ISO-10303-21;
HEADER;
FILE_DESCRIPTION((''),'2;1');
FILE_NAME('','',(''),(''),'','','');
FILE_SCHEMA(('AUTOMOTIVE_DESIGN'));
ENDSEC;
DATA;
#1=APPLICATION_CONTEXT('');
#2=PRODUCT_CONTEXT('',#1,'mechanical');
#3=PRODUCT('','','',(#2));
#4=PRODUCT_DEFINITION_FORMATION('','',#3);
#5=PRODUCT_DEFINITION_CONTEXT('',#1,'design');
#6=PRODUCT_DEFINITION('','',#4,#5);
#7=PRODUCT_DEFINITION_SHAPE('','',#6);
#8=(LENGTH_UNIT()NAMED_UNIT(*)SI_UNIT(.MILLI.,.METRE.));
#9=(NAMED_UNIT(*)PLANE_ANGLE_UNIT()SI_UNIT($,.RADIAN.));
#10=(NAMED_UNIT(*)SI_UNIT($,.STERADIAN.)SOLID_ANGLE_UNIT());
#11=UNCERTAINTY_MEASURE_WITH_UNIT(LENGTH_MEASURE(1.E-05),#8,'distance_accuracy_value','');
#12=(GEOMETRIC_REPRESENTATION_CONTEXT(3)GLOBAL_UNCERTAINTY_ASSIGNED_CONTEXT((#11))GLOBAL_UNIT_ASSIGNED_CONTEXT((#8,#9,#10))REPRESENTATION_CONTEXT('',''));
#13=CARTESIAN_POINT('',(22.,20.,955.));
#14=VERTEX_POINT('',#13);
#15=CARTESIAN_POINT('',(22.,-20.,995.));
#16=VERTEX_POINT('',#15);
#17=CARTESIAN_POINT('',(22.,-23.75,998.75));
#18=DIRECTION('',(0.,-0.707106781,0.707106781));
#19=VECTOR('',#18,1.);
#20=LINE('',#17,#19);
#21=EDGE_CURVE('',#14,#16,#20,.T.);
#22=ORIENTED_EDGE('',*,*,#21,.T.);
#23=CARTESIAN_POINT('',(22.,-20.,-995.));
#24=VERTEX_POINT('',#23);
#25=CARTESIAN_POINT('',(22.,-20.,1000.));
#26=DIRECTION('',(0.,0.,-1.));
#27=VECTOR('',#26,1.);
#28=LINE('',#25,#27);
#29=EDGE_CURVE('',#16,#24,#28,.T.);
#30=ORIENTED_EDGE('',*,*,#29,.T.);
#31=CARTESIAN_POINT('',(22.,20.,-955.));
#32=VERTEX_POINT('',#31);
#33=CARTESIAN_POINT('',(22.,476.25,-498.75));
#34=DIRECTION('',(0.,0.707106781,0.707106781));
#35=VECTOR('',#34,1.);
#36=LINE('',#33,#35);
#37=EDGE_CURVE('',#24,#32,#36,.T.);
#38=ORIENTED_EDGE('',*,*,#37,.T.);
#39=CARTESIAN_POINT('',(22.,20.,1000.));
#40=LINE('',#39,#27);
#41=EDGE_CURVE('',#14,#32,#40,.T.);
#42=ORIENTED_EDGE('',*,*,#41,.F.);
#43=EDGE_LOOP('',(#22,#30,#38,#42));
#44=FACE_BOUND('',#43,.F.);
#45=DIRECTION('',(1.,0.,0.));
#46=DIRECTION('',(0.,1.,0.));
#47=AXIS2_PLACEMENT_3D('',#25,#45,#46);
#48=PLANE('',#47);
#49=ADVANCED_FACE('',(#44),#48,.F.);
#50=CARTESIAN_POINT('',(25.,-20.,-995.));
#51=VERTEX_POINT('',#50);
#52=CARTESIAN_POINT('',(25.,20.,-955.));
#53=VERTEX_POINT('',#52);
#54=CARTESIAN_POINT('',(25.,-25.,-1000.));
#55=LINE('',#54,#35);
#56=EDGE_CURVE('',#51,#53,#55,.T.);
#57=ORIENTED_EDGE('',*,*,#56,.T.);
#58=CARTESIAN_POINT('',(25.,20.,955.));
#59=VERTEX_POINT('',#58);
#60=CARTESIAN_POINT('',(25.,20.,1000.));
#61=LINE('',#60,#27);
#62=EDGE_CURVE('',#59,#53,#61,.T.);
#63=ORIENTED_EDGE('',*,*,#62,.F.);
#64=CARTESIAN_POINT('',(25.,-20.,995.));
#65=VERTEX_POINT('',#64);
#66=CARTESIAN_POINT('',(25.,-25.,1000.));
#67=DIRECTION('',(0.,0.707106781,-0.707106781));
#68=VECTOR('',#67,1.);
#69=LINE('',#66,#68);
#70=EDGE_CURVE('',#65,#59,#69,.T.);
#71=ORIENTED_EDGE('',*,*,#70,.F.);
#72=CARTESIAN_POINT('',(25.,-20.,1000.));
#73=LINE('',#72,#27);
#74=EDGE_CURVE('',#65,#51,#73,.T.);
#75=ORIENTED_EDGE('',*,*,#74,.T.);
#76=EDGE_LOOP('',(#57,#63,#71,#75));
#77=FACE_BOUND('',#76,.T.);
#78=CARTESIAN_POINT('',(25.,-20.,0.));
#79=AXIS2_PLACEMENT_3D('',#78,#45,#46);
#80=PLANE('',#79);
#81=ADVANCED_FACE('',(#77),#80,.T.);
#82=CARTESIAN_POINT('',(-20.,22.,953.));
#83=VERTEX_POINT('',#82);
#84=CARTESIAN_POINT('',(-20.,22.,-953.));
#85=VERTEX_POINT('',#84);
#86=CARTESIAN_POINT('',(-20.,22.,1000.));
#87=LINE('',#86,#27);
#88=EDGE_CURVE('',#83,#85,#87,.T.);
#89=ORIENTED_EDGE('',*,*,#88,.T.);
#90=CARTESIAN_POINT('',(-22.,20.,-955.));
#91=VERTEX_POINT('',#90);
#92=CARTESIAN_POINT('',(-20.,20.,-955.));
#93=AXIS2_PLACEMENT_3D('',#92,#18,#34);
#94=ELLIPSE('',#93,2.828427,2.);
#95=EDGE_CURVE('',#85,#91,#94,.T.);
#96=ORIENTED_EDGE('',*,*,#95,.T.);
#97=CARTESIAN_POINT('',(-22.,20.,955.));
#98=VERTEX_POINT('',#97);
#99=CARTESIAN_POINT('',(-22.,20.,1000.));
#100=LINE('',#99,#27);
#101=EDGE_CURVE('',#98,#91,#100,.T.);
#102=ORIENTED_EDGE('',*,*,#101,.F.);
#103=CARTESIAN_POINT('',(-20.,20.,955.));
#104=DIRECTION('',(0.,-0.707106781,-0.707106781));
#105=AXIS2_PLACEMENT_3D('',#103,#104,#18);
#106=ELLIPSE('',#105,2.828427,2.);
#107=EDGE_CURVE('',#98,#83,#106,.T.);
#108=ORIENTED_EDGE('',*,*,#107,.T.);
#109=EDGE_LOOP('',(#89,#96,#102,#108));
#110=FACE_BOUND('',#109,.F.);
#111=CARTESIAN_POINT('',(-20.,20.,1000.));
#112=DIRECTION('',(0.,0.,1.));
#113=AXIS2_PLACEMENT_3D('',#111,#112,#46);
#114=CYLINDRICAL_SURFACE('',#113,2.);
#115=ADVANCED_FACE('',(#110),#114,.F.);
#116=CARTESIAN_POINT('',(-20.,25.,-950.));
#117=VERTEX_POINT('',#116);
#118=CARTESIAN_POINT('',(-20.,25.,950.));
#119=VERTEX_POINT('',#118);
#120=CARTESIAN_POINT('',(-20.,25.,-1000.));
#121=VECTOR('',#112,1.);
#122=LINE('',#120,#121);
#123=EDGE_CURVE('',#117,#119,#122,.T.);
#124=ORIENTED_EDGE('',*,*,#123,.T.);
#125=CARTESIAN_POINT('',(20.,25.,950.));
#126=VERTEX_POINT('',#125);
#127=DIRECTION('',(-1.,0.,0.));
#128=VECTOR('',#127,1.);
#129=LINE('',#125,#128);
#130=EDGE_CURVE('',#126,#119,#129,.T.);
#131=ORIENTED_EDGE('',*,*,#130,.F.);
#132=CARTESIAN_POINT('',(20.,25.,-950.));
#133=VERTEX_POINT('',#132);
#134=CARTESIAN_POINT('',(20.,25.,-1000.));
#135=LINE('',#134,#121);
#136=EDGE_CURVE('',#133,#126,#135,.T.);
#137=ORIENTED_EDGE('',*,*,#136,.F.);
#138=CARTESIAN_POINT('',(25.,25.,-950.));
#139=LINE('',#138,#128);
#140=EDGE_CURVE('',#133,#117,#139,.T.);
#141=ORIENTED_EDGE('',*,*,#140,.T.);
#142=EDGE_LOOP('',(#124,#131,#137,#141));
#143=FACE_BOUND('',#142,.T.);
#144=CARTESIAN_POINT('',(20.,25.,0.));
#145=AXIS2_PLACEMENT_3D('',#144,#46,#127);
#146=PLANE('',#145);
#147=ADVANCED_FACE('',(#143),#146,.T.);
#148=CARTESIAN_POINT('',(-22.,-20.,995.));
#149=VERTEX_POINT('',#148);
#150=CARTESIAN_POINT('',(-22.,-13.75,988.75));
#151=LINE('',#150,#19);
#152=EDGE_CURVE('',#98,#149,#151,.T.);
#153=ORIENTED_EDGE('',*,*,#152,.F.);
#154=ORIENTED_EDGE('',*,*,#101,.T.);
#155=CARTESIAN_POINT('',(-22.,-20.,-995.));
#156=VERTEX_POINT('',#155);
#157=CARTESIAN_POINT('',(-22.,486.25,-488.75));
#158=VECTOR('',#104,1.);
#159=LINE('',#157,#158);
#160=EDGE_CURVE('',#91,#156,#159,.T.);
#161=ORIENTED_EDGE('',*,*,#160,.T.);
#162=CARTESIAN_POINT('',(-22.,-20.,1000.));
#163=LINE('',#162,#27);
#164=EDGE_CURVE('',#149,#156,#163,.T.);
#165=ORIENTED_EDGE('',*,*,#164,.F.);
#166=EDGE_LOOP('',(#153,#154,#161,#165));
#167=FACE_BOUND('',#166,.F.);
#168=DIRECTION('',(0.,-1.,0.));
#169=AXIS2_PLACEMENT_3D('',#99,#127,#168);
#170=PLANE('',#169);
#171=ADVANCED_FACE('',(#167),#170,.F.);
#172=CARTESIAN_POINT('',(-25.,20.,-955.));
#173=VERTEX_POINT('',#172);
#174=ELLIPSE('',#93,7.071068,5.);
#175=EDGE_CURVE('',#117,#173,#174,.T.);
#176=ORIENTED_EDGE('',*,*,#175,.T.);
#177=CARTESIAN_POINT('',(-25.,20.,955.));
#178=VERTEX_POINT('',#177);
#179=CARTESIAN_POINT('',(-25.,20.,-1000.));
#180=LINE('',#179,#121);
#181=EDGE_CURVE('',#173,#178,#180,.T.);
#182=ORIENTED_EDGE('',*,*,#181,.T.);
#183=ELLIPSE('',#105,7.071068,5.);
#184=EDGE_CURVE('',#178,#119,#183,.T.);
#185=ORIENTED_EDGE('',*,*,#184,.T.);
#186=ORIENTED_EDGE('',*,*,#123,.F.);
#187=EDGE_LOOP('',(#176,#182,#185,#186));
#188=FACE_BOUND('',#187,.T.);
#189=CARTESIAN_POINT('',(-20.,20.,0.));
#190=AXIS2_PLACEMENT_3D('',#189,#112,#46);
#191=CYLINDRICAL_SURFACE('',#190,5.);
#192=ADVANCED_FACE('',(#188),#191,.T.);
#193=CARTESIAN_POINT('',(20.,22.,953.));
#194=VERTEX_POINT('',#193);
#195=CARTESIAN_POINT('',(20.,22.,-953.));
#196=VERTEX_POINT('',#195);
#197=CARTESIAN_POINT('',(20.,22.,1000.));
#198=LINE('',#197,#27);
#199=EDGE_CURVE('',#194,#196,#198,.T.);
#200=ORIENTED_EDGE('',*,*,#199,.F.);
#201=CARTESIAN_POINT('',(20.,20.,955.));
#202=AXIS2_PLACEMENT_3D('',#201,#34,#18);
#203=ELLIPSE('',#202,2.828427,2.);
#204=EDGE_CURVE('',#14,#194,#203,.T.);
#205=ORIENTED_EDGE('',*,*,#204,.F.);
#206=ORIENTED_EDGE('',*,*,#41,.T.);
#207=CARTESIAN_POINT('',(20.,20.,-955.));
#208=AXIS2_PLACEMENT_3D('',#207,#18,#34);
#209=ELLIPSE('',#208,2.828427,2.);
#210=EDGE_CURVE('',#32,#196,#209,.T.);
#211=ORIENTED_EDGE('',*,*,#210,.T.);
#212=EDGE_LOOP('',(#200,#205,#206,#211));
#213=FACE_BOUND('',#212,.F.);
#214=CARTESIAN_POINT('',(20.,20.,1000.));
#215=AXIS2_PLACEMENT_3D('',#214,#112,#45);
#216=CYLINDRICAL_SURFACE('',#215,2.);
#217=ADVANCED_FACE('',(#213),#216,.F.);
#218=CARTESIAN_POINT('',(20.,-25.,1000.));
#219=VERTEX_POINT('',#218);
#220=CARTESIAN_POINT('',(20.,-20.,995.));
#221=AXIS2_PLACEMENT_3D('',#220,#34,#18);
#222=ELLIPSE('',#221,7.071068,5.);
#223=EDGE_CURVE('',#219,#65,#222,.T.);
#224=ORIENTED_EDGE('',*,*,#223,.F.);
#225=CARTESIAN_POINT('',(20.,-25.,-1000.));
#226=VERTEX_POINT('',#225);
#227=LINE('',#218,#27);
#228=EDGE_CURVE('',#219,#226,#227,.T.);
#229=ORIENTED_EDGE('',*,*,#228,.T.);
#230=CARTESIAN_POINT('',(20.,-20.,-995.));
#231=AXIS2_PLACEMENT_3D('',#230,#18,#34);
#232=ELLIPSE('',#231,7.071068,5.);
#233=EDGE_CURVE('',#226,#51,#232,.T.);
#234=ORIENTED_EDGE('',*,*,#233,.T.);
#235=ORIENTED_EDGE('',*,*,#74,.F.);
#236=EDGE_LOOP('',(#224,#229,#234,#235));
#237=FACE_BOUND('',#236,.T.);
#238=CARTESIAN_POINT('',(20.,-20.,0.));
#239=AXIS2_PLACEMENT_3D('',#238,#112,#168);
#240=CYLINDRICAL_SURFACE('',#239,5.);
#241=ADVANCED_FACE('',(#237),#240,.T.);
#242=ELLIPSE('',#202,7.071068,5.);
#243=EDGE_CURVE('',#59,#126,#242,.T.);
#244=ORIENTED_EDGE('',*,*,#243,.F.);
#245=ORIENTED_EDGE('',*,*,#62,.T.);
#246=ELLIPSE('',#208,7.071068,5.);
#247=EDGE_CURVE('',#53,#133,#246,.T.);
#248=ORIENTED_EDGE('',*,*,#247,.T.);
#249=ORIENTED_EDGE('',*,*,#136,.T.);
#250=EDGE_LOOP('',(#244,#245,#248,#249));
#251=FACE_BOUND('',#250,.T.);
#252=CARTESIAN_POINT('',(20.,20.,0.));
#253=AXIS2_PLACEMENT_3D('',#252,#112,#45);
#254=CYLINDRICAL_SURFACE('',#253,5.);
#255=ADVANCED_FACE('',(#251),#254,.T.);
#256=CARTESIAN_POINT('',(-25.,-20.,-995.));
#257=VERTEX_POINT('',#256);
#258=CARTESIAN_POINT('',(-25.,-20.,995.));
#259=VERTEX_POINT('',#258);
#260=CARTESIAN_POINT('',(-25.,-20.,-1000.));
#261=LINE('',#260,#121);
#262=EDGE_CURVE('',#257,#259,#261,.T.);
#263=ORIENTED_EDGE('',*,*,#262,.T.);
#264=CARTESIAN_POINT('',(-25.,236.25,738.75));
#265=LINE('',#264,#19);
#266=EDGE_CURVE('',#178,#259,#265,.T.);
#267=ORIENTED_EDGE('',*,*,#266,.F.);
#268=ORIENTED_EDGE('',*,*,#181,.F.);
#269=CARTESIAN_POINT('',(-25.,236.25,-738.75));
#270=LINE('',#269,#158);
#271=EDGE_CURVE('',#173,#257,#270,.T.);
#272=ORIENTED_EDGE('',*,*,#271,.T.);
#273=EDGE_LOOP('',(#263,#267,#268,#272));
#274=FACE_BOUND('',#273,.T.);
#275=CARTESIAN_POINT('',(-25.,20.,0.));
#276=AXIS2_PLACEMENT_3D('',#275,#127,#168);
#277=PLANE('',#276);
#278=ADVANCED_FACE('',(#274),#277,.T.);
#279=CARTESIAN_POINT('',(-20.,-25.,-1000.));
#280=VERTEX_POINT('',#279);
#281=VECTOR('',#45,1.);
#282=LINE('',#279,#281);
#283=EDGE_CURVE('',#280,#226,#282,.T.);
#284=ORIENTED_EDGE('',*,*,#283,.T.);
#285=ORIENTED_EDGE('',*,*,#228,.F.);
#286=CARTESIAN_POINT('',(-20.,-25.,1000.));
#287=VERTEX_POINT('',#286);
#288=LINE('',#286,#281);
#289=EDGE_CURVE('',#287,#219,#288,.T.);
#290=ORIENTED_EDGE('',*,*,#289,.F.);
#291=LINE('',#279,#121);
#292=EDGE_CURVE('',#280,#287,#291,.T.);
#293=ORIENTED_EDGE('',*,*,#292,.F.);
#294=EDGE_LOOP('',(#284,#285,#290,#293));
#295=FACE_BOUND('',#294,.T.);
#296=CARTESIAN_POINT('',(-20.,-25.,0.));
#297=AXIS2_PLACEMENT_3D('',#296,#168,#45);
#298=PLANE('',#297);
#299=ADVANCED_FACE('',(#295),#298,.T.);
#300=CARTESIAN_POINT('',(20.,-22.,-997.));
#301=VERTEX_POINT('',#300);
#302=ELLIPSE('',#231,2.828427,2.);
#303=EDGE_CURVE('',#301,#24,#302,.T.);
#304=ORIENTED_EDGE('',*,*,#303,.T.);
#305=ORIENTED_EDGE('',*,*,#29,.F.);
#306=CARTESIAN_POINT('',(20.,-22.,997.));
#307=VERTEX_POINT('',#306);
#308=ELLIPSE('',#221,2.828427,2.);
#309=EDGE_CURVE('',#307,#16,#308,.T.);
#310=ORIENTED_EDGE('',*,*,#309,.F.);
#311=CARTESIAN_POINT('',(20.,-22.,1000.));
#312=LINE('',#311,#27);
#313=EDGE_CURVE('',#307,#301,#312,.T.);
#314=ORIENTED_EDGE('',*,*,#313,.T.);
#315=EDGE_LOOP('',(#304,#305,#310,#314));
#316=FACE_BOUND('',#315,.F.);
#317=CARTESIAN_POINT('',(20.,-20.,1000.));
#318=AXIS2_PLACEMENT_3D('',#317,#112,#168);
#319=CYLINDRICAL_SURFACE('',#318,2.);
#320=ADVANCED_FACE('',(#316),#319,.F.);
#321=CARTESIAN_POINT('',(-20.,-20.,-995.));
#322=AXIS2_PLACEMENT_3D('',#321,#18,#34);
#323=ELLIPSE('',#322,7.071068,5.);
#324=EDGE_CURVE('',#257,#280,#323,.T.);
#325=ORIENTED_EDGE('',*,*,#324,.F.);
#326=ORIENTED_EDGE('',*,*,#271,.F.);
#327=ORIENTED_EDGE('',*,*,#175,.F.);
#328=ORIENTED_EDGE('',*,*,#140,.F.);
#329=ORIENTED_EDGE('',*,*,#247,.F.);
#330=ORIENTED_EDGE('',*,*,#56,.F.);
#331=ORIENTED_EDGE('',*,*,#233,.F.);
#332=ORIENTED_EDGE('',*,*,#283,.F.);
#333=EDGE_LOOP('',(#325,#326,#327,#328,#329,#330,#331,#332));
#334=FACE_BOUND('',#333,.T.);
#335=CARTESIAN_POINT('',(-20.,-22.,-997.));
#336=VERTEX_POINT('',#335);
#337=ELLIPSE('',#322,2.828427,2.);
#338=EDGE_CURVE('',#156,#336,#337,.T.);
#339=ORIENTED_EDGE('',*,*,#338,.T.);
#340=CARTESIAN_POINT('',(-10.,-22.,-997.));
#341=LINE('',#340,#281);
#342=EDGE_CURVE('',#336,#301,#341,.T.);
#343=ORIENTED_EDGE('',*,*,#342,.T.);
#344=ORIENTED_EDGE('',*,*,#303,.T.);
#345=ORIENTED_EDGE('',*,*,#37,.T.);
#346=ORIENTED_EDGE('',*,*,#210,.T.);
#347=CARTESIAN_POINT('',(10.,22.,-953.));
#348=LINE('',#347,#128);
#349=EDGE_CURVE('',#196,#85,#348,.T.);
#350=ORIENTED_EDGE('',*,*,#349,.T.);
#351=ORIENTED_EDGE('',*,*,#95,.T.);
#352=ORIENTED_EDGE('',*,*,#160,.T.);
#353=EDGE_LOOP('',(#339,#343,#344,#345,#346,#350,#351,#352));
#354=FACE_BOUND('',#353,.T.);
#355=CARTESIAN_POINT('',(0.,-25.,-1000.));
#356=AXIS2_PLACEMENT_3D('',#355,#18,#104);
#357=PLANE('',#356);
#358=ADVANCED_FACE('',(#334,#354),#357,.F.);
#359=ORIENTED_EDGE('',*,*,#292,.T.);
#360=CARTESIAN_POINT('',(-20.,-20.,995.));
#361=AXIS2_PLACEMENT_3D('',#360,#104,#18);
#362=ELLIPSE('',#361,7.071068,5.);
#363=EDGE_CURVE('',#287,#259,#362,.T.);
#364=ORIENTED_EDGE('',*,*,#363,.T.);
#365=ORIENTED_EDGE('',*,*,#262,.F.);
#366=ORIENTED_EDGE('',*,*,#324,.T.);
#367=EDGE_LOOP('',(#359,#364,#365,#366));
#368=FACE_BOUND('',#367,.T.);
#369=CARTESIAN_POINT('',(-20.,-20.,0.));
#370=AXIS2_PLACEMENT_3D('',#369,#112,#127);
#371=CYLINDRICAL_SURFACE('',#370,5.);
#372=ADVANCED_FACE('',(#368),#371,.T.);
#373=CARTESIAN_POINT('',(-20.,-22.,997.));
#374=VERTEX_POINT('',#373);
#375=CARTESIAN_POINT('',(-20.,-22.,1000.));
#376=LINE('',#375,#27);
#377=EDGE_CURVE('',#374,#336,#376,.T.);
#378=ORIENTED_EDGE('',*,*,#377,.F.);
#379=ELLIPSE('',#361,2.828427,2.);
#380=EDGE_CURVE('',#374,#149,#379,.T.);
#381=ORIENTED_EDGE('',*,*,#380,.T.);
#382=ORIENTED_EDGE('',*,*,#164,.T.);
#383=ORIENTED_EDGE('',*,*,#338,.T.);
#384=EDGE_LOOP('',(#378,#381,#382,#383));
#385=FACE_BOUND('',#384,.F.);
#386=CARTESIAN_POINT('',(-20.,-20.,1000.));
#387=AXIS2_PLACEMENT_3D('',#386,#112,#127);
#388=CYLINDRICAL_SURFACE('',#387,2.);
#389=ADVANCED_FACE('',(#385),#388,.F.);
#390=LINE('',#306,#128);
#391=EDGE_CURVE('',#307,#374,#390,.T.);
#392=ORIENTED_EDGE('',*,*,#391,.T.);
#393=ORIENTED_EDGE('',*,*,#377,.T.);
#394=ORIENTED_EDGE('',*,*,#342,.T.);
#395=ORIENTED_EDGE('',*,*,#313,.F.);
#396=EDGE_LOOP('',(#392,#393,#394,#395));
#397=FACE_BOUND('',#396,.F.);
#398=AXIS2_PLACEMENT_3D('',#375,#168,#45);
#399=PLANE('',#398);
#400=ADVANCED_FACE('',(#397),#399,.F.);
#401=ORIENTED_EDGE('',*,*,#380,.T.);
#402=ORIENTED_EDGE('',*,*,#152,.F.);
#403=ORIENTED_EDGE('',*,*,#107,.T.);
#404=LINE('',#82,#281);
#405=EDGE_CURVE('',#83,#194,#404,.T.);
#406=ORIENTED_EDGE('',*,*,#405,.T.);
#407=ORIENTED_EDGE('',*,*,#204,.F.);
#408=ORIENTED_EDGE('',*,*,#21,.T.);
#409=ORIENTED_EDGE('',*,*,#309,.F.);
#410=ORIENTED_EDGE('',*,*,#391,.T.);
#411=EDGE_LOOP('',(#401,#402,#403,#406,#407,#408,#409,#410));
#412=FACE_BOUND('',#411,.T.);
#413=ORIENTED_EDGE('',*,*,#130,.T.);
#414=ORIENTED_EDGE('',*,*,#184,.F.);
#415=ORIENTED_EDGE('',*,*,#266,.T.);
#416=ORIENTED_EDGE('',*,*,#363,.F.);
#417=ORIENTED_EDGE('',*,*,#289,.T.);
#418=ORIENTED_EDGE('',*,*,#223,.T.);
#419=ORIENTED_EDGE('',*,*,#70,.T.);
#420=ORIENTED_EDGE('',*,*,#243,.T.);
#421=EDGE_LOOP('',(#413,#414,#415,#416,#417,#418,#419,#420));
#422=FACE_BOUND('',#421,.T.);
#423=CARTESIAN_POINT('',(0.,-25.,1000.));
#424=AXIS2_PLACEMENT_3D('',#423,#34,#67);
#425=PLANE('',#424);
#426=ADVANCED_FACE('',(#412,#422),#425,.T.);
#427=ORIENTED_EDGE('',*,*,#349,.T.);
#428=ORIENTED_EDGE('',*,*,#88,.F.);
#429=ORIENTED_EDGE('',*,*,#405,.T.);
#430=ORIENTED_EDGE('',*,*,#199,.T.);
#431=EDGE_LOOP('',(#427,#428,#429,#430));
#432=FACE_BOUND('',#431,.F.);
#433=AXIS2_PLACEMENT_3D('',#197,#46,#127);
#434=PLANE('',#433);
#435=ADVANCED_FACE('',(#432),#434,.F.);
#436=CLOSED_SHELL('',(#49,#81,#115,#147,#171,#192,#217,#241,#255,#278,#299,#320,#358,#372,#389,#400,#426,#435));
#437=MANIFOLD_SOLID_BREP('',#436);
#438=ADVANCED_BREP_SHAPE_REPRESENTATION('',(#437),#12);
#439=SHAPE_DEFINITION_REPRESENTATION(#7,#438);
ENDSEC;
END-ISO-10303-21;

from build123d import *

# Parameters (mm, degrees)
F1_DEPTH      = 1000
F3_DEPTH      = 2000.001
F5_DEPTH      = 25.001
F5_DEPTH_BACK = 25


# Not quite as in the source:
# - a pattern or mirror of a feature is missing from the dataset's text; its kind, count and spacing are read off the source's solid


with BuildPart() as f1:
    # F0 (on Top) → F1 (new body, symmetric)
    with BuildSketch(Plane.XY):
        with BuildLine():
            ThreePointArc((25, 20), (23.5355339059, 23.5355339059), (20, 25))
            Line((20, 25), (-20, 25))
            ThreePointArc((-20, 25), (-23.5355339059, 23.5355339059), (-25, 20))
            Line((-25, 20), (-25, -20))
            ThreePointArc((-25, -20), (-23.5355339059, -23.5355339059), (-20, -25))
            Line((-20, -25), (20, -25))
            ThreePointArc((20, -25), (23.5355339059, -23.5355339059), (25, -20))
            Line((25, -20), (25, 20))
        make_face()
    extrude(amount=F1_DEPTH, both=True)

    # F2 (on face) → F3 (cut, through all)
    with BuildSketch(Plane.XY.offset(1000)):
        with BuildLine():
            ThreePointArc((-22, -20), (-21.4142135624, -21.4142135624), (-20, -22))
            Line((-20, -22), (20, -22))
            ThreePointArc((20, -22), (21.4142135624, -21.4142135624), (22, -20))
            Line((22, -20), (22, 20))
            ThreePointArc((22, 20), (21.4142135624, 21.4142135624), (20, 22))
            Line((20, 22), (-20, 22))
            ThreePointArc((-20, 22), (-21.4142135624, 21.4142135624), (-22, 20))
            Line((-22, 20), (-22, -20))
        make_face()
    extrude(amount=-F3_DEPTH, mode=Mode.SUBTRACT)

    # F4 (on Right) → F5 (cut, two sides)
    with BuildSketch(Plane.YZ) as f5_sk:
        Polygon((25, 1000), (-25, 1000), (25, 950), align=None)
    f5 = extrude(amount=-F5_DEPTH, mode=Mode.SUBTRACT) + extrude(f5_sk.sketch, amount=F5_DEPTH_BACK, mode=Mode.SUBTRACT)

    # F5_copies: F5 across plane
    add(f5.mirror(Plane(origin=(0, 0, 0), x_dir=(-1, 0, 0), z_dir=(0, 0, -1))), mode=Mode.SUBTRACT)


solid = f1.part
